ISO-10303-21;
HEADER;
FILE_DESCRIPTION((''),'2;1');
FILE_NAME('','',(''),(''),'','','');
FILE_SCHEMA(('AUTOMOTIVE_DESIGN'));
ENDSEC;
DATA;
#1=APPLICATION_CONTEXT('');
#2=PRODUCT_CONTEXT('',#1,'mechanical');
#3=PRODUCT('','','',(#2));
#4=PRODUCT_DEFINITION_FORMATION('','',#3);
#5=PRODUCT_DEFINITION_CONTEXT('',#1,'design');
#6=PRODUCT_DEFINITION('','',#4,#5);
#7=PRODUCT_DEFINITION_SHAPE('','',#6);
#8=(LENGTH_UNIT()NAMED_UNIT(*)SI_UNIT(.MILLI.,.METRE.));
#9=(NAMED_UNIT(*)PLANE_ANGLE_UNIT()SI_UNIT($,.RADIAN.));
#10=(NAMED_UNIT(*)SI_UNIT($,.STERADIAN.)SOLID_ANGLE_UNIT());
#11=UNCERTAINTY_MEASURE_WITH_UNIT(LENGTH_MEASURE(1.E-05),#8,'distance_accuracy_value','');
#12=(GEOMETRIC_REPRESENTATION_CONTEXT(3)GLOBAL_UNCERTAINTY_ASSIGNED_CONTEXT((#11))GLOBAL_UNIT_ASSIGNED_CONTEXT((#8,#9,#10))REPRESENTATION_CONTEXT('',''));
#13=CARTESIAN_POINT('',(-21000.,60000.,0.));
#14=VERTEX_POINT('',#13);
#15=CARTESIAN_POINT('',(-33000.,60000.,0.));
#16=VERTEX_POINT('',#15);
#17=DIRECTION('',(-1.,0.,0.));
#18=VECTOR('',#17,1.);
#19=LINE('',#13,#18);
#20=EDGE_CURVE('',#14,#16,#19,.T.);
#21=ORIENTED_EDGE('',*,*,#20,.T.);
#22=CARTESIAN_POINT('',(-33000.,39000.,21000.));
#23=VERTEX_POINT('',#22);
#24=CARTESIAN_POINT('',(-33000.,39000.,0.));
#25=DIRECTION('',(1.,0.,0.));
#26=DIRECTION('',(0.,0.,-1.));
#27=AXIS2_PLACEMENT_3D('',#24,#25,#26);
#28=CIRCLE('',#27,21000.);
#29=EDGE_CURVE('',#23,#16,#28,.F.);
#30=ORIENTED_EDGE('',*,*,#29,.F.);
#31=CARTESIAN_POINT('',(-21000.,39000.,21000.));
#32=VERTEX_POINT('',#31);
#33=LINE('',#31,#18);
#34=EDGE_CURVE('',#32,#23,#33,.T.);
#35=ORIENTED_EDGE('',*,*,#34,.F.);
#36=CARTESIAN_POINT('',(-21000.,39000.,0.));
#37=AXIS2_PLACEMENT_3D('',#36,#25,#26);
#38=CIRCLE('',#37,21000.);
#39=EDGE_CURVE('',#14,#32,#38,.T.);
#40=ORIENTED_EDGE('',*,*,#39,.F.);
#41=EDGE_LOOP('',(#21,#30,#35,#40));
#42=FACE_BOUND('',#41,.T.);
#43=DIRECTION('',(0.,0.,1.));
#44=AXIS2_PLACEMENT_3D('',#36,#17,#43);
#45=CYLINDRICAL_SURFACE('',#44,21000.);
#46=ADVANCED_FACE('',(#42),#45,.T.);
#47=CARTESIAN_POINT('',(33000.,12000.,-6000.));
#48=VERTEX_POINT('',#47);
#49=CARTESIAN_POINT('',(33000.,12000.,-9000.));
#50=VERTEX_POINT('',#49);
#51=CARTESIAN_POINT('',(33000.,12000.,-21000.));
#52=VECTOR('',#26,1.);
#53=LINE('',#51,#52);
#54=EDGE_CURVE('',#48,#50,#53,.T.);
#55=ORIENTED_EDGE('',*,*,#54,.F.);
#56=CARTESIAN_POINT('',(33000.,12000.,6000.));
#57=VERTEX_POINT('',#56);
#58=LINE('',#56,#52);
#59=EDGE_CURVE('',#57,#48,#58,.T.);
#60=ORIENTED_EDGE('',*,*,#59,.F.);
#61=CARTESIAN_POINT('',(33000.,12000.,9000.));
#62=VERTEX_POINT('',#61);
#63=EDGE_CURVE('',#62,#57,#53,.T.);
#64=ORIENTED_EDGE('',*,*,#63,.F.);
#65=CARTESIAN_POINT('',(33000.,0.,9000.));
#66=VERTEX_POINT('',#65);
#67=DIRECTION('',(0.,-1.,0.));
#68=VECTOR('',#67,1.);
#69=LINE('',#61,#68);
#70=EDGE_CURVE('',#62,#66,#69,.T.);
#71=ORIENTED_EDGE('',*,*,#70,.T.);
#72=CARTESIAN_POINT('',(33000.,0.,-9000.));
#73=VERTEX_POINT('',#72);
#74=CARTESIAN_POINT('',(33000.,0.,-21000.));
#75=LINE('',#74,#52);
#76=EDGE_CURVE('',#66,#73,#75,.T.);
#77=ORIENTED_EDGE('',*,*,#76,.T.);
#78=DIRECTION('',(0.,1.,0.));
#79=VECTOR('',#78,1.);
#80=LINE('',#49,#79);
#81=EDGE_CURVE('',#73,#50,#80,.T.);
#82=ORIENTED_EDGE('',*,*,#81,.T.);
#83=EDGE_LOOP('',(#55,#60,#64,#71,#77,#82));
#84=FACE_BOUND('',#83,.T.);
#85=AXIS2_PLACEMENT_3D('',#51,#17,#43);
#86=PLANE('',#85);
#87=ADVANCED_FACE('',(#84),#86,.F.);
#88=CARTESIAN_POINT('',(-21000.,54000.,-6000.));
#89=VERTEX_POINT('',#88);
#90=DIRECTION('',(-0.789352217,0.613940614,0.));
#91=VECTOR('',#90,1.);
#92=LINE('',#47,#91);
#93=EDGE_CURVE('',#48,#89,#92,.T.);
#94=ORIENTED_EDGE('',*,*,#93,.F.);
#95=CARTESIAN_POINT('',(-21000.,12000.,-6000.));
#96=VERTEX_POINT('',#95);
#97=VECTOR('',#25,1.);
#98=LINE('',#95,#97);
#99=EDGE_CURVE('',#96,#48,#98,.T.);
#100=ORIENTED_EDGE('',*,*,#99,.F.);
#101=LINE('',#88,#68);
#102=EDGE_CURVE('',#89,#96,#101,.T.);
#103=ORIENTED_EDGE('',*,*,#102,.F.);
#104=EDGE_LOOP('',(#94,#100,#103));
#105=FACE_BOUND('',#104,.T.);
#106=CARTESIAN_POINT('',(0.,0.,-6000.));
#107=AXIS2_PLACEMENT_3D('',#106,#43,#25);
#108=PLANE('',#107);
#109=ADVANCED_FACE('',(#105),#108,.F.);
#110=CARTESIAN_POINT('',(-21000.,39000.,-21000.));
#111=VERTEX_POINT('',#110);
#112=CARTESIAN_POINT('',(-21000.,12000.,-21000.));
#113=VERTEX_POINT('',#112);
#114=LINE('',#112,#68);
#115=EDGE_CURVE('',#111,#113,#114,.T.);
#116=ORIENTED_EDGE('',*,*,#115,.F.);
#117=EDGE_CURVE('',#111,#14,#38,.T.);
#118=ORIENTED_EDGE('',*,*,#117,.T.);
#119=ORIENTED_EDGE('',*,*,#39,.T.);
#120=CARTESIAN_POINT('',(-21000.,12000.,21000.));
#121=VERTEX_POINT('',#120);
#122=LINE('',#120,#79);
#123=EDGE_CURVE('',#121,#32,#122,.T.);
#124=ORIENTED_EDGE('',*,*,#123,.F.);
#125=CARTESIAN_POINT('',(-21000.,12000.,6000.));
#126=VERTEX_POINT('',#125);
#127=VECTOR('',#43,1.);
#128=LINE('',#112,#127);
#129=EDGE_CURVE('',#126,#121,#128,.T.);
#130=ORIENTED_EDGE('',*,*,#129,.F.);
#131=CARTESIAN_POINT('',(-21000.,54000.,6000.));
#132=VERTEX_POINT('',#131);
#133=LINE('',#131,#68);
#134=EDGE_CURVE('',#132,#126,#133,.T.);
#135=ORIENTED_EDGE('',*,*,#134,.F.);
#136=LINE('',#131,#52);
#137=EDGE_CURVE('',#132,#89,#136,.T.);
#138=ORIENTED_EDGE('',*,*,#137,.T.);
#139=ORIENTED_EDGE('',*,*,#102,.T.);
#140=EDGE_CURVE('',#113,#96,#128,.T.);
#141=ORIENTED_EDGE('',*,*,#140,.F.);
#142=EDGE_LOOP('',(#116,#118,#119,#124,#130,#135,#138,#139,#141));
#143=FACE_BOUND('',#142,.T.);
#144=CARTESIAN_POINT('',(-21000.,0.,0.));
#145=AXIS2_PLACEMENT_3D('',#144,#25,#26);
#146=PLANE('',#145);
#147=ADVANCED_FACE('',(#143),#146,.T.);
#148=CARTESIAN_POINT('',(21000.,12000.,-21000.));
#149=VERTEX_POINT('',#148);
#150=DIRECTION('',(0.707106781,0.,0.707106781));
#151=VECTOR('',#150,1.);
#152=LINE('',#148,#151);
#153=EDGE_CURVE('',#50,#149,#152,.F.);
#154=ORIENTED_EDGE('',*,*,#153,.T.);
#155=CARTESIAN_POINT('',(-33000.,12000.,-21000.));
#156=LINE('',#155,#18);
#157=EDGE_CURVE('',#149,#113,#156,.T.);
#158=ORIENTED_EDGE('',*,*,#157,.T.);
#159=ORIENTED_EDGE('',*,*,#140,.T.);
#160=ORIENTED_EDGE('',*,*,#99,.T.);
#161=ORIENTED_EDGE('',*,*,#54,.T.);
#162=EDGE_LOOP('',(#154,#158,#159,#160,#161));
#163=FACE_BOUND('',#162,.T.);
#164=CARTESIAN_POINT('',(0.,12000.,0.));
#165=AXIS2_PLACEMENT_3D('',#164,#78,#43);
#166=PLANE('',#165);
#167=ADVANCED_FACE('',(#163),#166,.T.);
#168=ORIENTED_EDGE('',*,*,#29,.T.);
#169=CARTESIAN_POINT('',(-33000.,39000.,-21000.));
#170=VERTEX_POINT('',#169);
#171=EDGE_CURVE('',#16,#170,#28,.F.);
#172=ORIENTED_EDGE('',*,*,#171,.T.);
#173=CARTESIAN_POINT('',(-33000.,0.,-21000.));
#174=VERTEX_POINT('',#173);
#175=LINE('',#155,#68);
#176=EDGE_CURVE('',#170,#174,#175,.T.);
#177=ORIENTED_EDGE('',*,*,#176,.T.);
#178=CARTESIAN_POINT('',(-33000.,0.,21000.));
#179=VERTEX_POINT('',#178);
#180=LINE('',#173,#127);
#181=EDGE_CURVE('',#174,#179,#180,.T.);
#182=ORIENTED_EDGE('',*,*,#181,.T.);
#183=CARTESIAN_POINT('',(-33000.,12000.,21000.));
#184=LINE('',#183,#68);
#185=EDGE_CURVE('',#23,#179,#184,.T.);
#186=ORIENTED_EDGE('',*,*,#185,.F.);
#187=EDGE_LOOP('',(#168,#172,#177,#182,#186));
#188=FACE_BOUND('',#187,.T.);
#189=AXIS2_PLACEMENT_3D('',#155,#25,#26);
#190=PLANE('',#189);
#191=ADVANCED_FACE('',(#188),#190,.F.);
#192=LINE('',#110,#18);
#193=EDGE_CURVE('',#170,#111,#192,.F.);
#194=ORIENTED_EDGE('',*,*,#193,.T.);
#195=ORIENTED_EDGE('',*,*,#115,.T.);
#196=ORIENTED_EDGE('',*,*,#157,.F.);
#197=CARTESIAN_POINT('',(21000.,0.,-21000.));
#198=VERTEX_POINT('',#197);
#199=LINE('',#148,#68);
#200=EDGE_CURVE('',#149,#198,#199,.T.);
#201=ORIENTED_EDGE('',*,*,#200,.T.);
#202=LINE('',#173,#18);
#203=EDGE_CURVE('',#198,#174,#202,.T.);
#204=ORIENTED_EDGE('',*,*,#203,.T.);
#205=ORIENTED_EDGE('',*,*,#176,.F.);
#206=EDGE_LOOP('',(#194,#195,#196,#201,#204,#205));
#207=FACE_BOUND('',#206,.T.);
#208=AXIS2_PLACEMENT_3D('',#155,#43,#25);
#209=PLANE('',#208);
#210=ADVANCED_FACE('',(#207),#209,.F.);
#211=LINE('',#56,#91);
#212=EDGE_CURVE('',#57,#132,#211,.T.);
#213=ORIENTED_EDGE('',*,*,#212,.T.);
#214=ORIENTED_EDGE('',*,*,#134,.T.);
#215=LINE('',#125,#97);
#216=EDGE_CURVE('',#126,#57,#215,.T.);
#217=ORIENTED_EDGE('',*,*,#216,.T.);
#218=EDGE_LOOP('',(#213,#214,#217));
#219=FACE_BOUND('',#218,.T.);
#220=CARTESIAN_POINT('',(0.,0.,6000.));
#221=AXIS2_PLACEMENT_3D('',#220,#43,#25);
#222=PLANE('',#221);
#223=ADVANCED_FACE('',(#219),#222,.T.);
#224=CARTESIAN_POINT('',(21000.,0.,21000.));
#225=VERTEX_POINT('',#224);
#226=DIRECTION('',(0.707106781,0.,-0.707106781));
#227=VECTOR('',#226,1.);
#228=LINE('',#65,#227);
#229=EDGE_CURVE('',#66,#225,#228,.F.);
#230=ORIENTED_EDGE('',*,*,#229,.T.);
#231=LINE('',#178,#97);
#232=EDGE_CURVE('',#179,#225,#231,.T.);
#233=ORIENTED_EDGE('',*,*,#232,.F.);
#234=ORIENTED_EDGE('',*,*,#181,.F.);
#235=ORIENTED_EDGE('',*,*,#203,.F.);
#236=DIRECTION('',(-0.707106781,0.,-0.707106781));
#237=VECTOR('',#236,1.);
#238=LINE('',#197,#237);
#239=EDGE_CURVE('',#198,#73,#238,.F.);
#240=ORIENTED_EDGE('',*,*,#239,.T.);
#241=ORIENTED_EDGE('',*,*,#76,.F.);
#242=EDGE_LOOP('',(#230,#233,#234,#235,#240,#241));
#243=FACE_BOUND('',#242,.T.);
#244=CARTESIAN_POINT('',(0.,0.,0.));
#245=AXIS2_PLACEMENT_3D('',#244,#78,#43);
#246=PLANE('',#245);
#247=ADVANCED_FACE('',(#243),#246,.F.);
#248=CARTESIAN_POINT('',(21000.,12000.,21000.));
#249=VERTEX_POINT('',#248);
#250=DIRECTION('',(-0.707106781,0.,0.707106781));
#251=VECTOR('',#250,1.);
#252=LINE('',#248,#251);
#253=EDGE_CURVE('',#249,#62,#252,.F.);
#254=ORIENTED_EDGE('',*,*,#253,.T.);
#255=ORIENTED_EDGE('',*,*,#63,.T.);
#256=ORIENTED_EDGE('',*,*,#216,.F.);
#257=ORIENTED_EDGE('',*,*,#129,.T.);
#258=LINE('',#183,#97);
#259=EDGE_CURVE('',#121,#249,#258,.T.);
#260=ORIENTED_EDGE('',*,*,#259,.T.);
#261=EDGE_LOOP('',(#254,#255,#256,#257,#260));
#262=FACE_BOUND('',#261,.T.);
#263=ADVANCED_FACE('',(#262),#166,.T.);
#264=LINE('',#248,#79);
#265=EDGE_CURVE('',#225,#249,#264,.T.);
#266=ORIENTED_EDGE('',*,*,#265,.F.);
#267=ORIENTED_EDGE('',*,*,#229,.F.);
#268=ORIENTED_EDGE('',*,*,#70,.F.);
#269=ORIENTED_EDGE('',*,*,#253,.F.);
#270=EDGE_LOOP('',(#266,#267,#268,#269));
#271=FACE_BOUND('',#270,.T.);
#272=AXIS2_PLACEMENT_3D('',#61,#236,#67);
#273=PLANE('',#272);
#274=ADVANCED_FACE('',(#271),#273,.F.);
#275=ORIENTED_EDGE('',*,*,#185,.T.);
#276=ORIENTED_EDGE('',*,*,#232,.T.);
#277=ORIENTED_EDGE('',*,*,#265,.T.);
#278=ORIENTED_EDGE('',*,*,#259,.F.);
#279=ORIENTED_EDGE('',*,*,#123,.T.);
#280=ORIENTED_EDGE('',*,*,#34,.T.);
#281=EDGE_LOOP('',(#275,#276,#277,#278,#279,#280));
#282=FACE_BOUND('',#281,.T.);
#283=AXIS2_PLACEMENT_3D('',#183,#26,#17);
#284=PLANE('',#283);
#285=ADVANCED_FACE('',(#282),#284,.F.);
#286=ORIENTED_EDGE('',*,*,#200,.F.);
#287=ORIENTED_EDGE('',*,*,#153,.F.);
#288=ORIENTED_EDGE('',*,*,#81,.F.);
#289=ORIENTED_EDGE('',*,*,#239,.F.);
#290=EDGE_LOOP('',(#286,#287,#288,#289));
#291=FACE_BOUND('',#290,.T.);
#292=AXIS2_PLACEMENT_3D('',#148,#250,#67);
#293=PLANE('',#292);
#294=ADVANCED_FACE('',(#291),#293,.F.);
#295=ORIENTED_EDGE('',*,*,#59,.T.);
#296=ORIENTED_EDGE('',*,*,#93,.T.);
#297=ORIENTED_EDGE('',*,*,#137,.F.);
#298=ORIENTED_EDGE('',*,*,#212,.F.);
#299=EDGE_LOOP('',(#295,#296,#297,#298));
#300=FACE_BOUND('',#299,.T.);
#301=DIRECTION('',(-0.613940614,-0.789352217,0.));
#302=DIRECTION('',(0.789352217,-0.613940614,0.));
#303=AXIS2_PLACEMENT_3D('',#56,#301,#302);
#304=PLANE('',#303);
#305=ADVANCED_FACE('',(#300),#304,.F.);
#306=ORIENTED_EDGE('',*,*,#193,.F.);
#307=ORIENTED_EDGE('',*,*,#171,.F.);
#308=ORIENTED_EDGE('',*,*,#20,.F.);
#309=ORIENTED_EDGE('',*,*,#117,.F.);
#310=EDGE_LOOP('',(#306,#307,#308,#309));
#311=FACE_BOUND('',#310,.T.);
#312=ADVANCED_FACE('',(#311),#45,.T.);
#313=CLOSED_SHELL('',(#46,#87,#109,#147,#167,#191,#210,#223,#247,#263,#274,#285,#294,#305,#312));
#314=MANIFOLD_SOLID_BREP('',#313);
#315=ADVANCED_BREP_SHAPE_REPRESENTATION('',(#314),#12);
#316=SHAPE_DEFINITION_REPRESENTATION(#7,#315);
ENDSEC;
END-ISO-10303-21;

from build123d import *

# Parameters (mm, degrees)
SKETCH10_W          = 66000
SKETCH10_H          = 42000
BOSS_EXTRUDE3_DEPTH = 12000
CHAMFER1_SIZE       = 12000
SKETCH14_W          = 42000
SKETCH14_H          = 48000
BOSS_EXTRUDE6_DEPTH = 12000
FILLET1_R           = 21000
BOSS_EXTRUDE7_DEPTH = 6000


with BuildPart() as part:
    # Sketch10 → Boss-Extrude3 (new body)
    with BuildSketch(Plane(origin=(0, 0, 0), x_dir=(1, 0, 0), z_dir=(0, 1, 0))):
        Rectangle(SKETCH10_W, SKETCH10_H)
    extrude(amount=BOSS_EXTRUDE3_DEPTH)

    # Chamfer1
    chamfer1_edges = [part.edges().sort_by_distance(p)[0] for p in [
        (33000, 6000, 21000),
        (33000, 6000, -21000),
    ]]
    chamfer(chamfer1_edges, length=CHAMFER1_SIZE)



with BuildPart() as body_2:
    # Sketch14 → Boss-Extrude6 (new body)
    with BuildSketch(Plane.ZY.offset(33000)):
        with Locations((0, 36000)):
            Rectangle(SKETCH14_W, SKETCH14_H)
    extrude(amount=-BOSS_EXTRUDE6_DEPTH)

    # Fillet1
    fillet1_edges = [body_2.edges().sort_by_distance(p)[0] for p in [
        (-27000, 60000, 21000),
        (-27000, 60000, -21000),
    ]]
    fillet(fillet1_edges, radius=FILLET1_R - 0.0001)  # a hair under: the kernel refuses the full size


with BuildPart() as part_1:
    add(part.part)

    add(body_2.part)  # Boss-Extrude7 merges body 2
    # Sketch15 → Boss-Extrude7 (add, symmetric)
    with BuildSketch(Plane.XY):
        Polygon((-21000, 54000), (-21000, 12000), (33000, 12000), align=None)
    extrude(amount=BOSS_EXTRUDE7_DEPTH, both=True)


solid = part_1.part
